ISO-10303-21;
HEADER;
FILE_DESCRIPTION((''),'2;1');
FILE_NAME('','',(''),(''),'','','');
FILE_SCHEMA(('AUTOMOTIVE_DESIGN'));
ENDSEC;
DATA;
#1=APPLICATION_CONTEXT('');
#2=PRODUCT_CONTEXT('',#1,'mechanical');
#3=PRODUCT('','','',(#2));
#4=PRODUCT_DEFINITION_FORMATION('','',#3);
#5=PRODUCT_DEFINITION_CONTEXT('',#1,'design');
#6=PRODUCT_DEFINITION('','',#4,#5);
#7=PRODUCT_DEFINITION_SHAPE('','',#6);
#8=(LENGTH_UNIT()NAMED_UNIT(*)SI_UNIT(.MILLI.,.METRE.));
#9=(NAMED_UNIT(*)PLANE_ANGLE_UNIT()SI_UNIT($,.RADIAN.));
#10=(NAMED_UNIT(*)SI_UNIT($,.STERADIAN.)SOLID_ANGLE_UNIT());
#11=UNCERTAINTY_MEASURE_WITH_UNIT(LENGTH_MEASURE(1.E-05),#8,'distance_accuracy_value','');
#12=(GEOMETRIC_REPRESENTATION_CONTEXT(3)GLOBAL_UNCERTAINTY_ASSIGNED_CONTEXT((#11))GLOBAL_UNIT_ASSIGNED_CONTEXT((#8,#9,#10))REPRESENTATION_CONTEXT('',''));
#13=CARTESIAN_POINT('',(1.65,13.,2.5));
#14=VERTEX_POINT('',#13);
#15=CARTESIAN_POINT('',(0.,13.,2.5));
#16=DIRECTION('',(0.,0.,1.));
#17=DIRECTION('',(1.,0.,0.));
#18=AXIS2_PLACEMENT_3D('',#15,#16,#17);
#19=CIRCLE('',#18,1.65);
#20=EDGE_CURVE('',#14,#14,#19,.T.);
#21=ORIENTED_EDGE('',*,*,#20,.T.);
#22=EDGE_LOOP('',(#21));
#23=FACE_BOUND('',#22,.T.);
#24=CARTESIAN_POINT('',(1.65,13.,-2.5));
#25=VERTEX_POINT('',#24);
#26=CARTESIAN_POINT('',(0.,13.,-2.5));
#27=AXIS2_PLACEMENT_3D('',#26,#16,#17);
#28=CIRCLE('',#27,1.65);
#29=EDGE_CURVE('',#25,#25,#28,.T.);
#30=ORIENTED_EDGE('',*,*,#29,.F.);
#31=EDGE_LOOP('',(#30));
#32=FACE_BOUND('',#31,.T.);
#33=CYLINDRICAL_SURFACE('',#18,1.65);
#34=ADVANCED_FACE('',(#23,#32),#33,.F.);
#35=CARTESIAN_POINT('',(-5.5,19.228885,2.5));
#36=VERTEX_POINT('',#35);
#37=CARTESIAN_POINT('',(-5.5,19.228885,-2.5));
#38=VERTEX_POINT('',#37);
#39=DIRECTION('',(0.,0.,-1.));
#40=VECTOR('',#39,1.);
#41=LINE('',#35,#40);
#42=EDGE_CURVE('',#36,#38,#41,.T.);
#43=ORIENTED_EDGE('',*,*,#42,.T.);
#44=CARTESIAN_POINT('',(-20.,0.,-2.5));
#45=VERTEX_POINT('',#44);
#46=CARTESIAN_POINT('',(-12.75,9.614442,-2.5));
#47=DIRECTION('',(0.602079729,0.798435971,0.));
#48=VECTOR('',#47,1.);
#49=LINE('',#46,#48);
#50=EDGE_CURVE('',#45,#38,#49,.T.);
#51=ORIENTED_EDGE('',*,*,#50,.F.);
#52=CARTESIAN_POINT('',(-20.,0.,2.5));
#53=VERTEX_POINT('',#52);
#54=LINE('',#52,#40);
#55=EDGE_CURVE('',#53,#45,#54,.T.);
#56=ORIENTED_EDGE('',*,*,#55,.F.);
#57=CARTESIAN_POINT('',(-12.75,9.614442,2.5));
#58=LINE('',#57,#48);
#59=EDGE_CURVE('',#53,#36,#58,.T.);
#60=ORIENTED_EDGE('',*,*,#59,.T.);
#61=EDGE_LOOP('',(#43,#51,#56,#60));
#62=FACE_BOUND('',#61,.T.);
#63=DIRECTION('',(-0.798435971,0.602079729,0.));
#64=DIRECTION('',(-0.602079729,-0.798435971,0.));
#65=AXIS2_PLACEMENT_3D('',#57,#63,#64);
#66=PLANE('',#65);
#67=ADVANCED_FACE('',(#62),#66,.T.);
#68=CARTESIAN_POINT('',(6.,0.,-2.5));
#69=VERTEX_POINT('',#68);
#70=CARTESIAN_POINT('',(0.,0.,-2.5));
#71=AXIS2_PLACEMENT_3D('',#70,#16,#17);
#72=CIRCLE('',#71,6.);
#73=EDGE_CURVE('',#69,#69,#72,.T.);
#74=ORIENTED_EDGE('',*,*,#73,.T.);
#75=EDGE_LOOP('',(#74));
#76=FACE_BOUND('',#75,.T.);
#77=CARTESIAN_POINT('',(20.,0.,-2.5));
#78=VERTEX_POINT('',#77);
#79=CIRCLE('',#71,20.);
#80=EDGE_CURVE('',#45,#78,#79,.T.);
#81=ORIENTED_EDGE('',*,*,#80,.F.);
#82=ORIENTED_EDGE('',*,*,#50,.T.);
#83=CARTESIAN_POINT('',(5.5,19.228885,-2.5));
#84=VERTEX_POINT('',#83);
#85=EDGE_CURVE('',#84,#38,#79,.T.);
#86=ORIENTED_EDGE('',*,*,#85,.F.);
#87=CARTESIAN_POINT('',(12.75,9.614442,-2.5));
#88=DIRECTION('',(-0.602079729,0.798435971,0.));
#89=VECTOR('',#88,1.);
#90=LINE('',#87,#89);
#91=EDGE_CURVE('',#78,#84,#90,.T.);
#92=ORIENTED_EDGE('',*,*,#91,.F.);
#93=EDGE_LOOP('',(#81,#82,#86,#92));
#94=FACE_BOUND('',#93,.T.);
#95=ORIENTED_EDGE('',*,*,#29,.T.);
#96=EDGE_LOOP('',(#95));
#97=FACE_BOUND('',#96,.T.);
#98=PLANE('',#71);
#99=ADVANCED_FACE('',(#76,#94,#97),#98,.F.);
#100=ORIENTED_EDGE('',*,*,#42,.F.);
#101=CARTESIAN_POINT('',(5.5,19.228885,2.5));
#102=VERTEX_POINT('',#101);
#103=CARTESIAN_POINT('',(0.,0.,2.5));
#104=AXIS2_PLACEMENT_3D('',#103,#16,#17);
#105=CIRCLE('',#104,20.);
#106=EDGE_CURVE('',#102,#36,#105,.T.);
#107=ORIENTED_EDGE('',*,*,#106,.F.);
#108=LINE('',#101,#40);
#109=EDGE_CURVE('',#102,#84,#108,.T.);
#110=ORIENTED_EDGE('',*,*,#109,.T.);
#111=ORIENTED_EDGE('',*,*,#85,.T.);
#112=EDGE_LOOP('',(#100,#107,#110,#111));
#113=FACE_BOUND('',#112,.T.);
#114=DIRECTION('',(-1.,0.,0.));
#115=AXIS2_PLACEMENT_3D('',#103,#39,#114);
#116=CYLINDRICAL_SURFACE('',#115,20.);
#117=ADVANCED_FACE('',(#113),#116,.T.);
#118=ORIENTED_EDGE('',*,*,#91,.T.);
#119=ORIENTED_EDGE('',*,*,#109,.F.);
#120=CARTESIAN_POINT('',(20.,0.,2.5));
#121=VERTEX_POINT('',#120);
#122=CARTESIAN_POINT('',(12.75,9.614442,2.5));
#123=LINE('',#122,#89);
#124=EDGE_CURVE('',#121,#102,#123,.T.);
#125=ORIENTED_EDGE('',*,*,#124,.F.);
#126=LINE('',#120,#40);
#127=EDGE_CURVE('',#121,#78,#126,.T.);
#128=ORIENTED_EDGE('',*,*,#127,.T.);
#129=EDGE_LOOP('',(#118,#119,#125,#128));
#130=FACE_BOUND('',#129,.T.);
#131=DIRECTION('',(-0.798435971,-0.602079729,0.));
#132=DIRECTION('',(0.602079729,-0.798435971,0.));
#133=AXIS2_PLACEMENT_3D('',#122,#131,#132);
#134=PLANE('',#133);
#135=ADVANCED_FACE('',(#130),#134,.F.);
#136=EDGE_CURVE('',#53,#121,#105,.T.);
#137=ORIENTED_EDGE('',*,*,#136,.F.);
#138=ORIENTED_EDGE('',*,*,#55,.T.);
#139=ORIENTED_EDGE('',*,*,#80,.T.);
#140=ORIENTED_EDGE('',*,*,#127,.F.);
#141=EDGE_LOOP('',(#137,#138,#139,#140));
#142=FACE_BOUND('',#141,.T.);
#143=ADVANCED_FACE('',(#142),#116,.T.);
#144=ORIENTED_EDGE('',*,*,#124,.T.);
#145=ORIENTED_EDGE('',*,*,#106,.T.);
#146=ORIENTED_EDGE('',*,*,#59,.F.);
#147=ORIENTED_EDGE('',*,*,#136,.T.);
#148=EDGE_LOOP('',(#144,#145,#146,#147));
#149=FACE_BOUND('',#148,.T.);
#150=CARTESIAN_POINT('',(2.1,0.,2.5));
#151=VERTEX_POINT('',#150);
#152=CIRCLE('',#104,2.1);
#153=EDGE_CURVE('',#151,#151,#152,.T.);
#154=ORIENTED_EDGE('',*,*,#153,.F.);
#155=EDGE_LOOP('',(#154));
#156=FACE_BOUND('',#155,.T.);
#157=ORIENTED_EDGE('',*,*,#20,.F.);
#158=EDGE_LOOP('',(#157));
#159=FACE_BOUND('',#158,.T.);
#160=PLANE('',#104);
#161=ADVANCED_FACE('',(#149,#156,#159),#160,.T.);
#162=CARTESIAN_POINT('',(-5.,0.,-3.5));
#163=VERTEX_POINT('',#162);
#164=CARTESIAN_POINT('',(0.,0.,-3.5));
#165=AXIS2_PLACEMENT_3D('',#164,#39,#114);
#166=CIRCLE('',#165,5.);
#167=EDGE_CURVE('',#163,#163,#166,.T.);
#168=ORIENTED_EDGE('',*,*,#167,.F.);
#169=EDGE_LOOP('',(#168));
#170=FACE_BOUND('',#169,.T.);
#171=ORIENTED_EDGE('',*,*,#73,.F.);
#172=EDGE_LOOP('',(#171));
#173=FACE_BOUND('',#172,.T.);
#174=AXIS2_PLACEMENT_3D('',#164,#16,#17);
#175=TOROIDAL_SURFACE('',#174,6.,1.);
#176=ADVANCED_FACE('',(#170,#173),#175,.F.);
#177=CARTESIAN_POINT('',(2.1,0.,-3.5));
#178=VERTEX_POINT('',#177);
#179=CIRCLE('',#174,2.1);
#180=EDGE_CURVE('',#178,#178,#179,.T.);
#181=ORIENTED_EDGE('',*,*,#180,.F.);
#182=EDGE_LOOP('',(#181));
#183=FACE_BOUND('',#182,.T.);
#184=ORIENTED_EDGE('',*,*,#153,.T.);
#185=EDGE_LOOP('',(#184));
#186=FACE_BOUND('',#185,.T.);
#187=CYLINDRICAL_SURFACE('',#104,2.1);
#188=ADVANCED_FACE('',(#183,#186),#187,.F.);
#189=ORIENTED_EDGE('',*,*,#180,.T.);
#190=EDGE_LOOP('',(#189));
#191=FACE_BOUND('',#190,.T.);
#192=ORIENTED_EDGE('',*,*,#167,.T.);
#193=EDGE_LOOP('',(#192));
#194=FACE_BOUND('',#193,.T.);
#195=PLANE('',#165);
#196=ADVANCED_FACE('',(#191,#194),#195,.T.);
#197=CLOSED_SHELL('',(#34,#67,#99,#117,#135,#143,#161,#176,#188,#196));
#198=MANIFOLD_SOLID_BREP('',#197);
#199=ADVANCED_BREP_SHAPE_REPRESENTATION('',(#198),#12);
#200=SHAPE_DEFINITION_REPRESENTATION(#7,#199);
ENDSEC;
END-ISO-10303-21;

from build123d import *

# Parameters (mm, degrees)
BOSS_EXTRUDE1_DEPTH = 2.5
SKETCH2_R           = 5
BOSS_EXTRUDE2_DEPTH = 1
FILLET1_R           = 1
M5_TAPPED_HOLE1_D   = 4.2
M4_TAPPED_HOLE1_D   = 3.3


with BuildPart() as part:
    # Sketch1 → Boss-Extrude1 (new, symmetric)
    with BuildSketch(Plane.XY):
        with BuildLine():
            Line((-5.5, 19.228884523), (-20, 0))
            ThreePointArc((-20, 0), (0, -20), (20, 0))
            Line((20, 0), (5.5, 19.228884523))
            ThreePointArc((5.5, 19.228884523), (0, 20), (-5.5, 19.228884523))
        make_face()
    extrude(amount=BOSS_EXTRUDE1_DEPTH, both=True)

    # Sketch2 → Boss-Extrude2 (add)
    with BuildSketch(Plane(origin=(0, 0, -2.5), x_dir=(-1, 0, 0), z_dir=(0, 0, -1))):
        Circle(SKETCH2_R)
    extrude(amount=BOSS_EXTRUDE2_DEPTH)

    # Fillet1
    fillet1_edges = [part.edges().sort_by_distance(p)[0] for p in [
        (5, 0, -2.5),
    ]]
    fillet(fillet1_edges, radius=FILLET1_R - 0.0001)  # a hair under: the kernel refuses the full size

    # M5 Tapped Hole1 (through all)
    with Locations(Plane.XY.offset(2.5)):
        with Locations((0, 0)):
            Hole(M5_TAPPED_HOLE1_D / 2)

    # M4 Tapped Hole1 (through all)
    with Locations(Plane(origin=(0, 13, 2.5), x_dir=(1, 0, 0), z_dir=(0, 0, 1))):
        with Locations((0, 0)):
            Hole(M4_TAPPED_HOLE1_D / 2)


solid = part.part
